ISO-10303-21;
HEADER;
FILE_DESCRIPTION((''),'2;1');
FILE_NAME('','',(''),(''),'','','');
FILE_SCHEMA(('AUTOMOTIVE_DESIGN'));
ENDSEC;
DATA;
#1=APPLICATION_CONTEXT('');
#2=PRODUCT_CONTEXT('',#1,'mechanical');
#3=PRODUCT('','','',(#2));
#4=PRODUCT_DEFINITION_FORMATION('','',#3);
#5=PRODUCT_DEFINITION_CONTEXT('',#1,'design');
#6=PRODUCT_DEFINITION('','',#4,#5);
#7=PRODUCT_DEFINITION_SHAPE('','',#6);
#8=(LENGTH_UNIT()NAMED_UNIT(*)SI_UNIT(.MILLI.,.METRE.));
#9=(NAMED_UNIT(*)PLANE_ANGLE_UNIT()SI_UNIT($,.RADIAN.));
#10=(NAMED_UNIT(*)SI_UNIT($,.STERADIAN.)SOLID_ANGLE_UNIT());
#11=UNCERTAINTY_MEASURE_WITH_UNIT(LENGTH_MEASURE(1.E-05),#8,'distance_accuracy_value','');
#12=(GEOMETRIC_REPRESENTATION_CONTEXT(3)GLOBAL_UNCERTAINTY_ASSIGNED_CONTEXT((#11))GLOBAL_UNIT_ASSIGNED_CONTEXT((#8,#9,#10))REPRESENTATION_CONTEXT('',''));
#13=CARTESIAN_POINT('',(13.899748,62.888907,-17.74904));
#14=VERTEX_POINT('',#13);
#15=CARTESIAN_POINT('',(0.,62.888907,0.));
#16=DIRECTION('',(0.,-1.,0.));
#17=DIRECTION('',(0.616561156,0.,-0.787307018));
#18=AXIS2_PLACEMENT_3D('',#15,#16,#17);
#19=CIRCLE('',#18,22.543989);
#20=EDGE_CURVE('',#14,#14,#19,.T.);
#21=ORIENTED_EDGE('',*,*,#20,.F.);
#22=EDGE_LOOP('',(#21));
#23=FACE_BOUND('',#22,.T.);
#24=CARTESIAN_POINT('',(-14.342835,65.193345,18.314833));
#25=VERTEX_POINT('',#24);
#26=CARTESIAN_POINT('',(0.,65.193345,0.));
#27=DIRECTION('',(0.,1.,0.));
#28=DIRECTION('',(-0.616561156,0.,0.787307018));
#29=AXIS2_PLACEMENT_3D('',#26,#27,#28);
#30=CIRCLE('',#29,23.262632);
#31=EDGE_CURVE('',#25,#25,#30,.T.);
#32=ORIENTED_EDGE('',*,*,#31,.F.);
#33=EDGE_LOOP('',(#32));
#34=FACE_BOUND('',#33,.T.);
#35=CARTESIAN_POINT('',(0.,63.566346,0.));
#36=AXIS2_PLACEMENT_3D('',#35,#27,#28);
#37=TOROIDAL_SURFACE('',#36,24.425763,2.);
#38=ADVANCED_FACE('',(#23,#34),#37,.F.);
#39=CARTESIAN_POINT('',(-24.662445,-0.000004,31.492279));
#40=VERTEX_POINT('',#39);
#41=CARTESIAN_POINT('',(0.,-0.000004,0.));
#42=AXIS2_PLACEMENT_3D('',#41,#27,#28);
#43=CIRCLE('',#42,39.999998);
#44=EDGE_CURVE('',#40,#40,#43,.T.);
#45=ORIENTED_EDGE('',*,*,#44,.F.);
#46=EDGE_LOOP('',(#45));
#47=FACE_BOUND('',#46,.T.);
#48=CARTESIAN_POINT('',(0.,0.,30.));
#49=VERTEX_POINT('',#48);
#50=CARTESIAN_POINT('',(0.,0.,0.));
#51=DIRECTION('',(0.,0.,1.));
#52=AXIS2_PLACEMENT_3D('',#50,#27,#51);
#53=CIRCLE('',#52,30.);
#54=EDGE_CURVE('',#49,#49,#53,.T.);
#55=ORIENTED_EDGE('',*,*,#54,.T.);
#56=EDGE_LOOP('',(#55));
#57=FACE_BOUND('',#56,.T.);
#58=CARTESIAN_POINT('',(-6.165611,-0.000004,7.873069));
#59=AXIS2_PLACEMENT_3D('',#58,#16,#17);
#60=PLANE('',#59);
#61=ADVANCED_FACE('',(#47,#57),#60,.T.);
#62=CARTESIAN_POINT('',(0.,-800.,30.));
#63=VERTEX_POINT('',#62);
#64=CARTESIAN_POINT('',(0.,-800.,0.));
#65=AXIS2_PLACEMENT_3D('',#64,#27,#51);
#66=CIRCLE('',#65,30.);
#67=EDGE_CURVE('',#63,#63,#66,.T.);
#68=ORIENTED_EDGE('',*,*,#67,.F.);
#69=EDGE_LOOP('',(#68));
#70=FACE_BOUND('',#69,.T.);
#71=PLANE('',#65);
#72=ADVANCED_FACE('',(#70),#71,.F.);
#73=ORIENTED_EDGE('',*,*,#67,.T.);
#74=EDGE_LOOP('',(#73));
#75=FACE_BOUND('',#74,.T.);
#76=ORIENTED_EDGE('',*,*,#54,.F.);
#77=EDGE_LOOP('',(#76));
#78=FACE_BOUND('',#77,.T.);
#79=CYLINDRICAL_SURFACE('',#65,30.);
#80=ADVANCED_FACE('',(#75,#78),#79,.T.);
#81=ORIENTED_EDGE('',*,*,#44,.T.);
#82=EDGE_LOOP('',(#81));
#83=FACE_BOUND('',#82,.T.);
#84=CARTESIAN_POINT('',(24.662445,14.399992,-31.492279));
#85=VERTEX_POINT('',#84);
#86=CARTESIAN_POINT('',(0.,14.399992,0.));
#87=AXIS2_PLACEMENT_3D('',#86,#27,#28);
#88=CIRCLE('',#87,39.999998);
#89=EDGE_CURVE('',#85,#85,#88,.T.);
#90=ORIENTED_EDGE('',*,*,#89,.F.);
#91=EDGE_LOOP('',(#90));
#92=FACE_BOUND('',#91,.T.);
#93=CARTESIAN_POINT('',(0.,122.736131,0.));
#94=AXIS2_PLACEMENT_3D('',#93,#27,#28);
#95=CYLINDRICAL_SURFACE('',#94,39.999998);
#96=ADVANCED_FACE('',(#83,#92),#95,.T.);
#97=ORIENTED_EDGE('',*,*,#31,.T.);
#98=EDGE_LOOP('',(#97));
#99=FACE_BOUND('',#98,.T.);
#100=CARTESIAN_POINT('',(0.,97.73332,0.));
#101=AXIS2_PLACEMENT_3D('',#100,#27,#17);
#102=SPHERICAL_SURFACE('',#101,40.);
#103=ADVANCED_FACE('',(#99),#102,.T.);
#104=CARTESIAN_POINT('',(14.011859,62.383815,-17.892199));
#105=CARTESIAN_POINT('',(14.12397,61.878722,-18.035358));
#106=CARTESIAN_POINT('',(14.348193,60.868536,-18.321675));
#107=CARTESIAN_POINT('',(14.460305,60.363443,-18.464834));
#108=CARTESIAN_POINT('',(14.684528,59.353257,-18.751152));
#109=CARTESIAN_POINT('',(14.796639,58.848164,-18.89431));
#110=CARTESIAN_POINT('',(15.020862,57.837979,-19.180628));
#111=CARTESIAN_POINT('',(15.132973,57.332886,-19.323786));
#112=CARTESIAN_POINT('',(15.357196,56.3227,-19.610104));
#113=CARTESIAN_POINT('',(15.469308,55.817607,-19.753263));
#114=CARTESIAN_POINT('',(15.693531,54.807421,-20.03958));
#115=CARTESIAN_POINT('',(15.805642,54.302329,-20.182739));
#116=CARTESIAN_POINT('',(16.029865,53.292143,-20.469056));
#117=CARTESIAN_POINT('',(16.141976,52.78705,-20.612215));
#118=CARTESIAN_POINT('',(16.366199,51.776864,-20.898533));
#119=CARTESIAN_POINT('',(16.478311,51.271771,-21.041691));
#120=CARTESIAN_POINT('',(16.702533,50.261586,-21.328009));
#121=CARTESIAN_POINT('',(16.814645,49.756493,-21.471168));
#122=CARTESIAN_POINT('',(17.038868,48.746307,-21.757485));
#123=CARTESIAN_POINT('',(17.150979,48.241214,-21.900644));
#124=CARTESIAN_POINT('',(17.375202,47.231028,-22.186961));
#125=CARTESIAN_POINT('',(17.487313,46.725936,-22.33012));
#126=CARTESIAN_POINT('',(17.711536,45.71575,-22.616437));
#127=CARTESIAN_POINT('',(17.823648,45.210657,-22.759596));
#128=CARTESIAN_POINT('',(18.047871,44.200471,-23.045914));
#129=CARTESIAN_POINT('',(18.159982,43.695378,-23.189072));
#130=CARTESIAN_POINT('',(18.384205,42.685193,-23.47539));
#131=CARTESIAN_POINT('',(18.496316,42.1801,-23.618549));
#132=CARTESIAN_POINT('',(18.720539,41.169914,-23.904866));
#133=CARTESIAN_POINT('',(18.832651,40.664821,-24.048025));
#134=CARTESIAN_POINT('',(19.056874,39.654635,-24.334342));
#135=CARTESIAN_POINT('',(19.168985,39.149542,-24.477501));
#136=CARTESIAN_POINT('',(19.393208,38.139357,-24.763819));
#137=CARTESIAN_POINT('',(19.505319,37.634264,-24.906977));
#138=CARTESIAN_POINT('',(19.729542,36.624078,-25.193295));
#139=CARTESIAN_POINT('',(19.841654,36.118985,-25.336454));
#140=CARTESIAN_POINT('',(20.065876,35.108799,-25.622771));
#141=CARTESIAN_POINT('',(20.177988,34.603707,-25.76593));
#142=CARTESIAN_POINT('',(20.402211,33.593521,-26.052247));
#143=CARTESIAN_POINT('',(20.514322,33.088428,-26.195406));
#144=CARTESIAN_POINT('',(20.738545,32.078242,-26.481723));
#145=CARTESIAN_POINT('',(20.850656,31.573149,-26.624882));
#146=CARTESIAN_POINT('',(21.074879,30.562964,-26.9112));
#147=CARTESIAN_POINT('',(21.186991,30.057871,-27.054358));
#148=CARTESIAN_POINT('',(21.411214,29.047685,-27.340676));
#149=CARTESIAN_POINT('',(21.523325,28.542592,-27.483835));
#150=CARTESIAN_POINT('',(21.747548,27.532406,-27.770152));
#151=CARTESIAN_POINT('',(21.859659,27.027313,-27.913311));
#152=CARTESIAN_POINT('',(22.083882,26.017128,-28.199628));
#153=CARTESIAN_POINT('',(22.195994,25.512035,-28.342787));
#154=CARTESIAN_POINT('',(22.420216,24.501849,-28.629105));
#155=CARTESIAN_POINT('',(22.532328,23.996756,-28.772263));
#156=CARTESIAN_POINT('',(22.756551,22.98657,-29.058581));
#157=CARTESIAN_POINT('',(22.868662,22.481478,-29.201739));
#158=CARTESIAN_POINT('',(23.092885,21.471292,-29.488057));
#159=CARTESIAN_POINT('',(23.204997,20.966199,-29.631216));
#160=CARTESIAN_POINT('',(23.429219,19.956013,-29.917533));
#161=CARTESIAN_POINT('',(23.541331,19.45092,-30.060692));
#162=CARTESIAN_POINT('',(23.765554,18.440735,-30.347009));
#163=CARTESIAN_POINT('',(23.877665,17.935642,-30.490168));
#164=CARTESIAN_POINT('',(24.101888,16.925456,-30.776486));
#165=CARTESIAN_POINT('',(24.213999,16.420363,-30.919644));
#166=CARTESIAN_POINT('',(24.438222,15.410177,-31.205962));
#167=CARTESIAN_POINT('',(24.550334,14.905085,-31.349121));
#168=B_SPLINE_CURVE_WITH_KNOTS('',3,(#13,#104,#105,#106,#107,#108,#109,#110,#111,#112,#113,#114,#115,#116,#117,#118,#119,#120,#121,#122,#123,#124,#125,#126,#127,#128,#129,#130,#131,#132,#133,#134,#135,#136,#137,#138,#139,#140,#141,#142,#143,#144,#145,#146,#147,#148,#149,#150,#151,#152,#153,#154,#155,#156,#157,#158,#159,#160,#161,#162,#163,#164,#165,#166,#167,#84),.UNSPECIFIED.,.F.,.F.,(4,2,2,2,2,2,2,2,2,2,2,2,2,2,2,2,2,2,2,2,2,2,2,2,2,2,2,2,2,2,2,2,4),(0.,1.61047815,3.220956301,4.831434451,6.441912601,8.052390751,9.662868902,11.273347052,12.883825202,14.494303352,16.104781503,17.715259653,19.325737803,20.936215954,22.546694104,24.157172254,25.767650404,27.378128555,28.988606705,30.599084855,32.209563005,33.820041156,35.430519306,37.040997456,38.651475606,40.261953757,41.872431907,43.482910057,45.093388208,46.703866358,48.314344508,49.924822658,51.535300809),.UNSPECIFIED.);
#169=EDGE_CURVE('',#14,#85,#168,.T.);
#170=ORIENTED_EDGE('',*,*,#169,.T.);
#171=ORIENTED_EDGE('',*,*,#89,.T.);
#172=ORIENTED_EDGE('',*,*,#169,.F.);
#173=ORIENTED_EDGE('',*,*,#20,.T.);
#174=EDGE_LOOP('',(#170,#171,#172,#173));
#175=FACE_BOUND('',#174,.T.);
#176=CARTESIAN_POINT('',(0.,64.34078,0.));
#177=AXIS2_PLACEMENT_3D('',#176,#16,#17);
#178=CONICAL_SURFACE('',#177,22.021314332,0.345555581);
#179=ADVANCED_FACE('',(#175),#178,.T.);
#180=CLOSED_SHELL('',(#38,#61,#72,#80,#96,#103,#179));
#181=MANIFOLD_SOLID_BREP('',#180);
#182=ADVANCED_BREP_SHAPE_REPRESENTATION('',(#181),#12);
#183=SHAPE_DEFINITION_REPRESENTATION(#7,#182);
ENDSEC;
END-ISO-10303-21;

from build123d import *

# Parameters (mm, degrees)
SKETCH1_R           = 30
EXTRUDE1_DEPTH      = 800
SKETCH_1_R          = 10
CUT_EXTRUDE_1_DEPTH = 35.6


# Read off the part's stored shape, not the designer's step: 连接重组1
with BuildPart() as part:
    # Sketch1 → Extrude1 (new body)
    with BuildSketch(Plane(origin=(0, 0, 0), x_dir=(1, 0, 0), z_dir=(0, 1, 0))):
        with Locations(Location((0, 0, 0), (0, 0, 270))):
            Circle(SKETCH1_R)
    extrude(amount=-EXTRUDE1_DEPTH)

    # 草图1 → 切除-拉伸1 (cut)
    with BuildSketch(Plane(origin=(0, 0, 0), x_dir=(1, 0, 0), z_dir=(0, 1, 0))):
        with Locations(Location((0, 0, 0), (0, 0, 270))):
            Circle(SKETCH_1_R)
    extrude(amount=-CUT_EXTRUDE_1_DEPTH, mode=Mode.SUBTRACT)

    # 连接重组1 outline → 连接重组1 (revolve)
    with BuildSketch(Plane.XY):
        with BuildLine():
            ThreePointArc((22.543988515, 62.888907458), (22.516451416, 64.161768918), (23.262631751, 65.193345138))
            ThreePointArc((23.262631751, 65.193345138), (38.089361999, 109.948085758), (0, 137.73332))
            Line((0, 137.73332), (0, -35.6))
            Line((0, -35.6), (10, -35.6))
            Line((10, -35.6), (10, 0))
            Line((10, 0), (30, 0))
            Line((30, 0), (39.999998202, -3.56e-06))
            Line((39.999998202, -3.56e-06), (39.999998202, 14.399991661))
            Line((39.999998202, 14.399991661), (22.543988515, 62.888907458))
        make_face()
    revolve(axis=Axis((0, 0, 0), (0, 1, 0)))


solid = part.part
